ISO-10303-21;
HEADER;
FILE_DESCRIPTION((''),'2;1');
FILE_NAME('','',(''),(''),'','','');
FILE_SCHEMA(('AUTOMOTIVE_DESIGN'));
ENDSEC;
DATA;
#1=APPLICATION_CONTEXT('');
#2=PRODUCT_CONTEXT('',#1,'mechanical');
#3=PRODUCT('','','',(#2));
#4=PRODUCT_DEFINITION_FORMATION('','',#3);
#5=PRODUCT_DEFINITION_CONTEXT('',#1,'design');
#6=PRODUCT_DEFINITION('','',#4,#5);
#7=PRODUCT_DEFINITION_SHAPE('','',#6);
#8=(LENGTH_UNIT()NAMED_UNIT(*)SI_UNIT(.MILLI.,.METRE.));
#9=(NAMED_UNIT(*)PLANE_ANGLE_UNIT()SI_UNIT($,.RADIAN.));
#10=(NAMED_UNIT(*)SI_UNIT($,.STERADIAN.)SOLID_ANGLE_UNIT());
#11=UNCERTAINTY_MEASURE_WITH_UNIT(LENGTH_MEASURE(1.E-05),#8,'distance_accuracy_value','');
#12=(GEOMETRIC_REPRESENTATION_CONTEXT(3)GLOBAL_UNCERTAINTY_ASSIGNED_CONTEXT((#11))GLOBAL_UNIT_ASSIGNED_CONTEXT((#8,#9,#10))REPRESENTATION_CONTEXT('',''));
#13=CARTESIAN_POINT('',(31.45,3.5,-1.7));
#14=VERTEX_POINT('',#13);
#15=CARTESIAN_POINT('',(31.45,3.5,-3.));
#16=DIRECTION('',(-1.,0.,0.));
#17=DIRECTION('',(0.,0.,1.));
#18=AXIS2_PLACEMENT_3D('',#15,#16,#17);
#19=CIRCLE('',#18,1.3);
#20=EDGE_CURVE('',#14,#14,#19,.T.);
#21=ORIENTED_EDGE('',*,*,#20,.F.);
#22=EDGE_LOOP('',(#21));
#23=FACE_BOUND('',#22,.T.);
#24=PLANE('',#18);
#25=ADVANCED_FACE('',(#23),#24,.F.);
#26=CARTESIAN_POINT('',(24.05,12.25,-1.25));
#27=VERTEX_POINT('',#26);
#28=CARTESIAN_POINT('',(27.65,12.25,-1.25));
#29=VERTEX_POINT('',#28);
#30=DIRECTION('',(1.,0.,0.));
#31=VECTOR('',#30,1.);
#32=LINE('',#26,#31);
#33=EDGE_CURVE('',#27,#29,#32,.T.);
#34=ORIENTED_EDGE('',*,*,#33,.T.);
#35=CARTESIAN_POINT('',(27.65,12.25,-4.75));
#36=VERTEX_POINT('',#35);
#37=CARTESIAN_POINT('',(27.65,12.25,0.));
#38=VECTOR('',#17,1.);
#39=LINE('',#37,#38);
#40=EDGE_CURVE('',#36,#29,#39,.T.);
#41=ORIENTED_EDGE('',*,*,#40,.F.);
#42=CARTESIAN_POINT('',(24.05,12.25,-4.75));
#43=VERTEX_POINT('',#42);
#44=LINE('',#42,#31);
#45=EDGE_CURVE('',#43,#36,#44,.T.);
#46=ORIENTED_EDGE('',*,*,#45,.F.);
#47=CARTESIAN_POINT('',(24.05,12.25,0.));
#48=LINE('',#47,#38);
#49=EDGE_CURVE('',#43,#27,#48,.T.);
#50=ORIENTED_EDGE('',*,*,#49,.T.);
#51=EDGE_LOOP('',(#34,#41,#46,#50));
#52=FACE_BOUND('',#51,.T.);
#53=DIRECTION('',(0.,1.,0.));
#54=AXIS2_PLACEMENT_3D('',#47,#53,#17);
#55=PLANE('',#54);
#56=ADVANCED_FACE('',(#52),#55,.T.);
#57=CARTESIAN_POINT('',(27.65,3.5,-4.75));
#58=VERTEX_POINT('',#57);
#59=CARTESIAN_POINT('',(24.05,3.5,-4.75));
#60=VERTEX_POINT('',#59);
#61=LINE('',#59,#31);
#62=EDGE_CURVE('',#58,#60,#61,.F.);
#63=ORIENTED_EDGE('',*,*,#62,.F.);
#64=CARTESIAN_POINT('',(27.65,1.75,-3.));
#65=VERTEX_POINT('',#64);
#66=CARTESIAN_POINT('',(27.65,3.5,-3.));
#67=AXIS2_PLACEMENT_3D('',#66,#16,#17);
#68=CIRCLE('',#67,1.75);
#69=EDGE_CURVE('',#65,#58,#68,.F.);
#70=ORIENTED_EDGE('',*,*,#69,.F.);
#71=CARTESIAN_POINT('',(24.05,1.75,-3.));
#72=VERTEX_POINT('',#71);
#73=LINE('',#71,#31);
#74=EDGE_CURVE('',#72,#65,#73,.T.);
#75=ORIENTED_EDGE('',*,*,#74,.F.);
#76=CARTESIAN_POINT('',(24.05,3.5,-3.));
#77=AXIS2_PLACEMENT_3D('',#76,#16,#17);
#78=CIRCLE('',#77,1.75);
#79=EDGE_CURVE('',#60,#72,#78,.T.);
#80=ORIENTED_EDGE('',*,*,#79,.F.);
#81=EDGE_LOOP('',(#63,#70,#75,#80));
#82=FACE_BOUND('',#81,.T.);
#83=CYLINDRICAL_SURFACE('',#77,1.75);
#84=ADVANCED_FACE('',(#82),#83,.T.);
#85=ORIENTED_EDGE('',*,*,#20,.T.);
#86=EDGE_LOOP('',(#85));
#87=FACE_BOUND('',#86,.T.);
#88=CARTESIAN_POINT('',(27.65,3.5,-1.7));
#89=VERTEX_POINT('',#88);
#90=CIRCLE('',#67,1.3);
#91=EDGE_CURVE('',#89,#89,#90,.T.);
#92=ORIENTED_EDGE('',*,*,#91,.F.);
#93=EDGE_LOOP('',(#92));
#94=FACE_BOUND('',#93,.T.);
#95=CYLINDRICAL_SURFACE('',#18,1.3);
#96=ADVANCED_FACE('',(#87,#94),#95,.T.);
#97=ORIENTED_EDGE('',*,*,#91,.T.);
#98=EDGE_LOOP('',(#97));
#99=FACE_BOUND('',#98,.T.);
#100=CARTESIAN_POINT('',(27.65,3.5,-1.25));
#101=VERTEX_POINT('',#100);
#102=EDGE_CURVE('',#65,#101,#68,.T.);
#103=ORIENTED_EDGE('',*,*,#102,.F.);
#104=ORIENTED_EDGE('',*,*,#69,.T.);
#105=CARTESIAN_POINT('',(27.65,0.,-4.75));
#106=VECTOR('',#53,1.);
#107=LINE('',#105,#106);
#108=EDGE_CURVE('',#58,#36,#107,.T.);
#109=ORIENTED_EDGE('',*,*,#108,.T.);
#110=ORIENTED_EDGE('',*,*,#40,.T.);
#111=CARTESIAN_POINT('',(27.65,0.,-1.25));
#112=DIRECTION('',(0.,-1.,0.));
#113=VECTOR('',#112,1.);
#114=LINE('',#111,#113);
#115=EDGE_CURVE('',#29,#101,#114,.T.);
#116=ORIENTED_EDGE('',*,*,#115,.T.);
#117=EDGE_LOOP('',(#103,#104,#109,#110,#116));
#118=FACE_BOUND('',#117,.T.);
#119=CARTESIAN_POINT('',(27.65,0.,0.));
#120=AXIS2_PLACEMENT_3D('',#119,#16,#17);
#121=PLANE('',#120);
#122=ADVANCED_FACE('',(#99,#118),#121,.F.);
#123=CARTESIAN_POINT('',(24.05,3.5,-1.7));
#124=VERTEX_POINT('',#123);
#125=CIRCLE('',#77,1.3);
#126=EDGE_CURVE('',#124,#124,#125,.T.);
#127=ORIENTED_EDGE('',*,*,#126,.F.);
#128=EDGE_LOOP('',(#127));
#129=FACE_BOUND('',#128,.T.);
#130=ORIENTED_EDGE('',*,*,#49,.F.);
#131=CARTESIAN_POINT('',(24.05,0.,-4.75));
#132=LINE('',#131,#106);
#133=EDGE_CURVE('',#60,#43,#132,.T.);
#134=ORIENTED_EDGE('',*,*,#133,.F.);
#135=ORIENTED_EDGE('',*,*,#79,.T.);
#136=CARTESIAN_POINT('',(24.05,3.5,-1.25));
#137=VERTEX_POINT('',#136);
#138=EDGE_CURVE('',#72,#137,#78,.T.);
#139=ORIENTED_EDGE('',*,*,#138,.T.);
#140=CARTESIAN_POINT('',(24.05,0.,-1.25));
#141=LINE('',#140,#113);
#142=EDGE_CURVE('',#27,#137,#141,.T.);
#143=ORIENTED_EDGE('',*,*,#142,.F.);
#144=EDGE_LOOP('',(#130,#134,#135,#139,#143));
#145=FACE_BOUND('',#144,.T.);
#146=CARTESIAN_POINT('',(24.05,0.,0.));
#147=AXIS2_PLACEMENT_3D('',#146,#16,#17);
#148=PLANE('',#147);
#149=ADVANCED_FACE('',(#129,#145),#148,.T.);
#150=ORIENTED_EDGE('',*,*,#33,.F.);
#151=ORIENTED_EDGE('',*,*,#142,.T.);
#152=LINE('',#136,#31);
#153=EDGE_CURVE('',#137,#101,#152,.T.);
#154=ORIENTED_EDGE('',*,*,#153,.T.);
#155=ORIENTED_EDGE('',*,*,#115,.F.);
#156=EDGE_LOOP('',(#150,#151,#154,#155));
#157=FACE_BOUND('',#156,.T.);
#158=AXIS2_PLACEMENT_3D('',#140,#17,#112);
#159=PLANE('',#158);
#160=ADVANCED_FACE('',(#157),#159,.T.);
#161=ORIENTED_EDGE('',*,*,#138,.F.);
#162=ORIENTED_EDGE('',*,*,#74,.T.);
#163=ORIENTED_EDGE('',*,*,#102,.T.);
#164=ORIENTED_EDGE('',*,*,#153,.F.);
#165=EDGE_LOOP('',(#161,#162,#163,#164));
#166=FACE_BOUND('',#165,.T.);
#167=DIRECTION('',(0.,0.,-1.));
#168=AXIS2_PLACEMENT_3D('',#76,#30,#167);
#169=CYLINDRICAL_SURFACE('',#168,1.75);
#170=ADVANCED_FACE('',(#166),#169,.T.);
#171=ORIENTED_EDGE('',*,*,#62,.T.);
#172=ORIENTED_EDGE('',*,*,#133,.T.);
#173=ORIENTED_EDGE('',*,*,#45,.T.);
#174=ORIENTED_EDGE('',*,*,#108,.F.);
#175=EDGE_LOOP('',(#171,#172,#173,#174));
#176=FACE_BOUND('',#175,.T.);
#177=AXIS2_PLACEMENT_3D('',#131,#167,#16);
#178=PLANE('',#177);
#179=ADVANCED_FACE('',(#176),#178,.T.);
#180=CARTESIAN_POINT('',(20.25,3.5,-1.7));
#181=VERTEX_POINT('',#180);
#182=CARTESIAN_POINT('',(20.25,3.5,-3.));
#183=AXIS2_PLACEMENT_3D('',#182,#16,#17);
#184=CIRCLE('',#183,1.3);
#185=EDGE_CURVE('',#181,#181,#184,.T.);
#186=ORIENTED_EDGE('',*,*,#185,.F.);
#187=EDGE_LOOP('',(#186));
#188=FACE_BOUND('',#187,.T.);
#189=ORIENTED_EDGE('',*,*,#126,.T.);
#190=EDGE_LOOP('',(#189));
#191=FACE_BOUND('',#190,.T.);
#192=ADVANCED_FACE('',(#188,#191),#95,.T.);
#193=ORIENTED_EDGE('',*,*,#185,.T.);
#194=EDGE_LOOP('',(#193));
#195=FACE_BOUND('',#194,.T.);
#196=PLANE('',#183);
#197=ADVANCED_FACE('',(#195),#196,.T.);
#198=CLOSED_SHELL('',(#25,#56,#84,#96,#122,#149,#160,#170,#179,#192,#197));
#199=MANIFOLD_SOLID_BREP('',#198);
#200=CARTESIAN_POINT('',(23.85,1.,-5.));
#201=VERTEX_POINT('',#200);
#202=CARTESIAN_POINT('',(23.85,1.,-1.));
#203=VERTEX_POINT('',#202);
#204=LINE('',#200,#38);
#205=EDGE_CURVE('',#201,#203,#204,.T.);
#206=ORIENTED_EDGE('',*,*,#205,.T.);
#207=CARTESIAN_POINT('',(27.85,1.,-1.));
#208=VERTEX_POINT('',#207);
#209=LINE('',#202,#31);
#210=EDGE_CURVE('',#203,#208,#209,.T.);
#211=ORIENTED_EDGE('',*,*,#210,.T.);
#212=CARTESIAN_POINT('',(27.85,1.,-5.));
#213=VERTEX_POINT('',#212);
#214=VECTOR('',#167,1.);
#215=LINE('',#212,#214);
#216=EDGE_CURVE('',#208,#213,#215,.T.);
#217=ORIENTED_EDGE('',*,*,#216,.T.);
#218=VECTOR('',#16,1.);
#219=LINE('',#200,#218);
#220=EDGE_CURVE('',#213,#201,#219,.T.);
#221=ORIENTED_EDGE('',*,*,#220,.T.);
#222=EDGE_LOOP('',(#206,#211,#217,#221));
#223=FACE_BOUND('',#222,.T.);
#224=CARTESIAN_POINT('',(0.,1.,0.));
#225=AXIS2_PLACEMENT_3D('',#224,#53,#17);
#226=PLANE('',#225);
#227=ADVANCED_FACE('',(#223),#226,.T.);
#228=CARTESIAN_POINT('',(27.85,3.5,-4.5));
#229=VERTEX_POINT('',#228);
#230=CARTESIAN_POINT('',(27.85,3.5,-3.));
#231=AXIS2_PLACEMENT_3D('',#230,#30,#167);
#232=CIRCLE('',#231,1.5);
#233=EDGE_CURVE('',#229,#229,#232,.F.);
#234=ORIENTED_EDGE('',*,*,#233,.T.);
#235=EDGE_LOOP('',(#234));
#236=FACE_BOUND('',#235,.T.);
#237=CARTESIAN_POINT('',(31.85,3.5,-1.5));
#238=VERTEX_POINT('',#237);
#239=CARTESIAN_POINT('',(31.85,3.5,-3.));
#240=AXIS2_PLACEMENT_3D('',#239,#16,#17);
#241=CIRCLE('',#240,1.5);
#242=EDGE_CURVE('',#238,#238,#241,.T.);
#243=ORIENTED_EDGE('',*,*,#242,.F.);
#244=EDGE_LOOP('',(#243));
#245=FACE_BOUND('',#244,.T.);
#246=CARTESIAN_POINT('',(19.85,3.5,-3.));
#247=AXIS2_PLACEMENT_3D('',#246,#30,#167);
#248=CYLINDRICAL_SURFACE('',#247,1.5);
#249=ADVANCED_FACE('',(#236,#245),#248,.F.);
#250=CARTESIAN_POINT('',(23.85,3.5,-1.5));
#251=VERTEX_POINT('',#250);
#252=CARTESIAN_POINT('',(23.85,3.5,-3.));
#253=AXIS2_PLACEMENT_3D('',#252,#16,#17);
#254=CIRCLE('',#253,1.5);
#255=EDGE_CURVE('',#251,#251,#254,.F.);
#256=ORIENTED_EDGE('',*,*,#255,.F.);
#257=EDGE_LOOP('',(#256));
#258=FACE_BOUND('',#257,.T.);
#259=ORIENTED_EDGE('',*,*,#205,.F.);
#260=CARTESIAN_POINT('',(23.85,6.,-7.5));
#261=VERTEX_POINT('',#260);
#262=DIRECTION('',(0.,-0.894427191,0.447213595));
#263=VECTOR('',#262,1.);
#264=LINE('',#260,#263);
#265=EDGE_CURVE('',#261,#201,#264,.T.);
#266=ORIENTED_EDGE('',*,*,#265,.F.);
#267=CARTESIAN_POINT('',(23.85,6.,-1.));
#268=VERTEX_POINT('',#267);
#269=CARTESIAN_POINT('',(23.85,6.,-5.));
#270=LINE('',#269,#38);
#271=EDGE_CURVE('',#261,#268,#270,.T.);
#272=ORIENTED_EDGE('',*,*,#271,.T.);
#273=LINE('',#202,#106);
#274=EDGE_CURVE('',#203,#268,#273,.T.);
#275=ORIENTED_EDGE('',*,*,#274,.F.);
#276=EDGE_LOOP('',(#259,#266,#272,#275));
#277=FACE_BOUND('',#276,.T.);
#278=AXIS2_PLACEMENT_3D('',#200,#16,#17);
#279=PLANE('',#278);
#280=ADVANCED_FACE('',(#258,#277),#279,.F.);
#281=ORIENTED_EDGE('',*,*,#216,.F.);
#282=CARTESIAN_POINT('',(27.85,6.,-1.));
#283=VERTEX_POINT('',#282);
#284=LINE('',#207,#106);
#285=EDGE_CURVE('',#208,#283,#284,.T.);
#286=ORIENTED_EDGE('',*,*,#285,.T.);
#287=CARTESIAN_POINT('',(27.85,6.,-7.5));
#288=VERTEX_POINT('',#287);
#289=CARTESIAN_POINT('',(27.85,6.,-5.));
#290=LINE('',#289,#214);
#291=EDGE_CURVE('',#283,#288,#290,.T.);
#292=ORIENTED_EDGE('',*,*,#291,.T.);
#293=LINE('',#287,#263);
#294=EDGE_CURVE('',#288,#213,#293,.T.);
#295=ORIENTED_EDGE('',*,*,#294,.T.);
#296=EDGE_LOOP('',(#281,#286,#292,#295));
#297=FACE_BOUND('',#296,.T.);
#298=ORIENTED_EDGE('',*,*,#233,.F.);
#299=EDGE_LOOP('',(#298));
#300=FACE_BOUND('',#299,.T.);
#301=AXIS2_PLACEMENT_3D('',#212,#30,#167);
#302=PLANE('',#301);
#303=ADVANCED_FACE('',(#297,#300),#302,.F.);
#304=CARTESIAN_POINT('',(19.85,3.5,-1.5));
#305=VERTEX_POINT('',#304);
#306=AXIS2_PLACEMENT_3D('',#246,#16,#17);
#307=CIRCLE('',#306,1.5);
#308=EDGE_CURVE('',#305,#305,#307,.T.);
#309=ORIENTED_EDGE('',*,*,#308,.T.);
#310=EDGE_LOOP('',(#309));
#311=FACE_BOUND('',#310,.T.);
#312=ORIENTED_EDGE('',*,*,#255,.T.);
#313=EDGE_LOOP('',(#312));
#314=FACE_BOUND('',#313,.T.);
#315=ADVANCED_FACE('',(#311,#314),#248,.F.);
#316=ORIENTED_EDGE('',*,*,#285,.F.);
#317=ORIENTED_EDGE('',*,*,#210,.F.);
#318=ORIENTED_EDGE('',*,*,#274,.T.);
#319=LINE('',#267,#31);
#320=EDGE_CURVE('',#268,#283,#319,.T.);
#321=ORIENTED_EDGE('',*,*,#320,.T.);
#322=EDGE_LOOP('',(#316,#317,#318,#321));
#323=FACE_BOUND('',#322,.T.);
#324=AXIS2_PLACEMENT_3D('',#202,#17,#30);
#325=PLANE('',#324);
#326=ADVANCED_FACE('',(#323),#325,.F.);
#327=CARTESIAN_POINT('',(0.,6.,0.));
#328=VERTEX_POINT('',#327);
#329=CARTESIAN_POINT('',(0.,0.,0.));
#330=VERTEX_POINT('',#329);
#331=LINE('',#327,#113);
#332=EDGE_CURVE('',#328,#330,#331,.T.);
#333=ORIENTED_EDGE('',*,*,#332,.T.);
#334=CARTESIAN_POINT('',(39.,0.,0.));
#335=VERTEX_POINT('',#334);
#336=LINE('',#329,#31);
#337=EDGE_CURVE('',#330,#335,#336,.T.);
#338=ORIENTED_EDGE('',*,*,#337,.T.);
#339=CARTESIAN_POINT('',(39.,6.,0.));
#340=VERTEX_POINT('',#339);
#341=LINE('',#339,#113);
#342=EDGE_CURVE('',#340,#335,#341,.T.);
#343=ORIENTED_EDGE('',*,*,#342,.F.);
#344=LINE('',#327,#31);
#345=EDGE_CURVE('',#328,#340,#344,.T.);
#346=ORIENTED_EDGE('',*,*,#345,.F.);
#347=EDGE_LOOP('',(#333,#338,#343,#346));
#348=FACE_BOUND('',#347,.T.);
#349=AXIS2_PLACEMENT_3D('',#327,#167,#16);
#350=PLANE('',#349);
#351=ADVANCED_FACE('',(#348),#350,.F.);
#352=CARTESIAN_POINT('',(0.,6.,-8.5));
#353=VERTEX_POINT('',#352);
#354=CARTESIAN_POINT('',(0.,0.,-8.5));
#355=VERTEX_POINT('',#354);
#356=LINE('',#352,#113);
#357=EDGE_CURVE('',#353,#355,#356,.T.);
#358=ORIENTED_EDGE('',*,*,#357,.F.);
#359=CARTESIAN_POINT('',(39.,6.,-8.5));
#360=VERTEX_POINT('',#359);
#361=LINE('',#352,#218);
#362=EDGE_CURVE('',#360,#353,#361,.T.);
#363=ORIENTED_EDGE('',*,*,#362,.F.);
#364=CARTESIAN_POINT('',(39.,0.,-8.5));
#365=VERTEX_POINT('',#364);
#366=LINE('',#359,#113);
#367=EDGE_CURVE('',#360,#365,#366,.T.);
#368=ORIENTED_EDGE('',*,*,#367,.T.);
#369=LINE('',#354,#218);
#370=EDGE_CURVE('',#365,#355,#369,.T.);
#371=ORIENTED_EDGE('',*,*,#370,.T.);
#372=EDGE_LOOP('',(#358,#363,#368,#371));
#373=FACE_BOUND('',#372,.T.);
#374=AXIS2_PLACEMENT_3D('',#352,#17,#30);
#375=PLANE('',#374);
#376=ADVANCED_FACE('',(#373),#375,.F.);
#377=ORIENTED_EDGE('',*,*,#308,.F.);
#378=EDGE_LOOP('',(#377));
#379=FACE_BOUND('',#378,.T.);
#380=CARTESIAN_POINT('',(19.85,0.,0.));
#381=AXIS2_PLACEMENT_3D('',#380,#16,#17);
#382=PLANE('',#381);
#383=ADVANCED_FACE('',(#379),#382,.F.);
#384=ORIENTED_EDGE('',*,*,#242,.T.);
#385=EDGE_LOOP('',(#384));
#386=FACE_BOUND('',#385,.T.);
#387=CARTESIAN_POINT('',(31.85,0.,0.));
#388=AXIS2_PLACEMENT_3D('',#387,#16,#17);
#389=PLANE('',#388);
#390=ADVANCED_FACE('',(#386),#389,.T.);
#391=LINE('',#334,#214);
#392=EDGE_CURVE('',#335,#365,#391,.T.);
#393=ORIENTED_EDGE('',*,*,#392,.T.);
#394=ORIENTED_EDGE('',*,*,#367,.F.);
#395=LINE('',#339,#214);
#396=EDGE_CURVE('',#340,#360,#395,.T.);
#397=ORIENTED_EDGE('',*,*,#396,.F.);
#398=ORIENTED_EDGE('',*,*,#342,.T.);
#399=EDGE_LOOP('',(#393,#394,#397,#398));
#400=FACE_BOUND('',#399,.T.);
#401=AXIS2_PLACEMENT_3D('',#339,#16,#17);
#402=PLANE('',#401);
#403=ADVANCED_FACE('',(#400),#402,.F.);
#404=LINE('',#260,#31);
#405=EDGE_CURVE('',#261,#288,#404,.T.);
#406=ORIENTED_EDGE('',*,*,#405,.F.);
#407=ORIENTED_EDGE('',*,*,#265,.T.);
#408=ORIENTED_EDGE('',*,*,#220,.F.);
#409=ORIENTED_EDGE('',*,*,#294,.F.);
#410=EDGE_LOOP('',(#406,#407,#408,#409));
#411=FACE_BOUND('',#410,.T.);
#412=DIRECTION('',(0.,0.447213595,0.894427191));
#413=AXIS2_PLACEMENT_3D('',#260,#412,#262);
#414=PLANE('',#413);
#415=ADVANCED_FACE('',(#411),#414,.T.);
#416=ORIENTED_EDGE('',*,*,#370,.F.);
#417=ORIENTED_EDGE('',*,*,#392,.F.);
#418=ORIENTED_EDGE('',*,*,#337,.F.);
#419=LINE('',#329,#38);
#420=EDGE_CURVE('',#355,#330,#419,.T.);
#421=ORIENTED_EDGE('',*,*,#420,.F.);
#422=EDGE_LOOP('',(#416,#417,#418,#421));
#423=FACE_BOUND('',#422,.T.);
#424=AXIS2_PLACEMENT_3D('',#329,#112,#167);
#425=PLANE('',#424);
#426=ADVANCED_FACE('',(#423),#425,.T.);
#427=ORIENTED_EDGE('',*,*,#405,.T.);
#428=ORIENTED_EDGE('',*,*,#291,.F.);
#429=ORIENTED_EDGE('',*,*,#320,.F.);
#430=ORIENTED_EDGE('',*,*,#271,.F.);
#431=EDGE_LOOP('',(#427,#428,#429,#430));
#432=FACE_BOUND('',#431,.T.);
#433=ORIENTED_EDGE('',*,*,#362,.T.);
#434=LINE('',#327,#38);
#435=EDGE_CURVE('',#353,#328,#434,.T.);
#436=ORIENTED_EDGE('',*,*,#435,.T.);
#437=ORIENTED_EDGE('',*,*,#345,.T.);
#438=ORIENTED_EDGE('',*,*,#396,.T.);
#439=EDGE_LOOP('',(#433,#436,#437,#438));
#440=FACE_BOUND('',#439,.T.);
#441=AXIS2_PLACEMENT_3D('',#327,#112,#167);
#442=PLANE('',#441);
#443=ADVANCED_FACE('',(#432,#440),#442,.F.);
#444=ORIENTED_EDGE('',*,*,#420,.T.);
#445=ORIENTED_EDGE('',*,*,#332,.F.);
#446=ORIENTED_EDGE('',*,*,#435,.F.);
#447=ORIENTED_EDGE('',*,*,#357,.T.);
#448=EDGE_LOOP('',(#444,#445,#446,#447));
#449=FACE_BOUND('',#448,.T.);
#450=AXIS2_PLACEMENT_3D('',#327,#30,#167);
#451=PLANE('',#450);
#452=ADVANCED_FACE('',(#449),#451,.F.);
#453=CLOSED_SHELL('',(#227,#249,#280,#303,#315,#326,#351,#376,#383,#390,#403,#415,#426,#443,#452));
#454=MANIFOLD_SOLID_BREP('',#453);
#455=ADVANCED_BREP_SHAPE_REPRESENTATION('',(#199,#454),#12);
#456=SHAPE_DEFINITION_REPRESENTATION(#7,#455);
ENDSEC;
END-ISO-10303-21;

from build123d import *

# Parameters (mm, degrees)
SKETCH1_W                = 39
SKETCH1_H                = 8.5
BOSS_EXTRUDE1_DEPTH      = 6
SKETCH2_W                = 4
SKETCH2_H                = 4
CUT_EXTRUDE1_DEPTH       = 5
CUT_EXTRUDE2_DEPTH       = 8
CUT_EXTRUDE2_DEPTH_BACK  = 4
SKETCH3_R                = 1.5
BOSS_EXTRUDE2_START      = 0.2
SKETCH4_W                = 3.5
SKETCH4_H                = 6.25
SKETCH4_H_2              = 0.75
SKETCH4_R                = 1.5
SKETCH4_R_2              = 1.3
BOSS_EXTRUDE2_DEPTH      = 3.6
BOSS_EXTRUDE3_DEPTH      = 7.6
BOSS_EXTRUDE3_DEPTH_BACK = 3.6
SKETCH4_3_R              = 1.3
FILLET1_R                = 1.75
CUT_EXTRUDE3_DEPTH       = 4


with BuildPart() as part:
    # Sketch1 → Boss-Extrude1 (new body)
    with BuildSketch(Plane(origin=(0, 0, 0), x_dir=(1, 0, 0), z_dir=(0, 1, 0))):
        with Locations((19.5, 4.25)):
            Rectangle(SKETCH1_W, SKETCH1_H)
    extrude(amount=BOSS_EXTRUDE1_DEPTH)

    # Sketch2 → Cut-Extrude1 (cut)
    with BuildSketch(Plane(origin=(0, 6, 0), x_dir=(1, 0, 0), z_dir=(0, 1, 0))):
        with Locations((25.85, 3)):
            Rectangle(SKETCH2_W, SKETCH2_H)
    extrude(amount=-CUT_EXTRUDE1_DEPTH, mode=Mode.SUBTRACT)

    # Sketch3 → Cut-Extrude2 (cut, two sides: drawn at the far end of the back side and taken through both)
    with BuildSketch(Plane.ZY.offset(-27.85).offset(-CUT_EXTRUDE2_DEPTH_BACK)):
        with Locations(Location((-3, 3.5, 0), (0, 0, 180))):
            Circle(SKETCH3_R)
    extrude(amount=CUT_EXTRUDE2_DEPTH + CUT_EXTRUDE2_DEPTH_BACK, mode=Mode.SUBTRACT)

    # Sketch5 → Cut-Extrude3 (cut)
    with BuildSketch(Plane.ZY.offset(-27.85)):
        Polygon((-5, 6), (-7.5, 6), (-5, 1), align=None)
    extrude(amount=CUT_EXTRUDE3_DEPTH, mode=Mode.SUBTRACT)


with BuildPart() as body_2:
    # Sketch4 → Boss-Extrude2 (new body)
    # profile 1 of 5: a face of its own
    with BuildSketch(Plane.ZY.offset(-27.85).offset(BOSS_EXTRUDE2_START)):
        with Locations((-3, 9.125)):
            Rectangle(SKETCH4_W, SKETCH4_H)
    # profile 2 of 5: a face of its own
    with BuildSketch(Plane.ZY.offset(-27.85).offset(BOSS_EXTRUDE2_START)):
        with Locations((-3, 5.625)):
            Rectangle(SKETCH4_W, SKETCH4_H_2)
    # profile 3 of 5: a face of its own
    with BuildSketch(Plane.ZY.offset(-27.85).offset(BOSS_EXTRUDE2_START)):
        with BuildLine():
            Line((-4.75, 1.75), (-3, 1.75))
            ThreePointArc((-3, 1.75), (-1.762563133, 2.262563133), (-1.25, 3.5))
            Line((-1.25, 3.5), (-1.25, 5.25))
            Line((-1.25, 5.25), (-4.75, 5.25))
            Line((-4.75, 5.25), (-4.75, 1.75))
        make_face()
        with Locations(Location((-3, 3.5, 0), (0, 0, 180))):
            Circle(SKETCH4_R, mode=Mode.SUBTRACT)
    # profile 4 of 5: a face of its own
    with BuildSketch(Plane.ZY.offset(-27.85).offset(BOSS_EXTRUDE2_START)):
        with Locations(Location((-3, 3.5, 0), (0, 0, 180))):
            Circle(SKETCH4_R)
        with Locations((-3, 3.5)):
            Circle(SKETCH4_R_2, mode=Mode.SUBTRACT)
    # profile 5 of 5: a face of its own
    with BuildSketch(Plane.ZY.offset(-27.85).offset(BOSS_EXTRUDE2_START)):
        with Locations((-3, 3.5)):
            Circle(SKETCH4_R_2)
    extrude(amount=BOSS_EXTRUDE2_DEPTH)

    # Sketch4<3> → Boss-Extrude3 (add, two sides: drawn at the far end of the back side and taken through both)
    with BuildSketch(Plane.ZY.offset(-27.85).offset(-BOSS_EXTRUDE3_DEPTH_BACK)):
        with Locations((-3, 3.5)):
            Circle(SKETCH4_3_R)
    extrude(amount=BOSS_EXTRUDE3_DEPTH + BOSS_EXTRUDE3_DEPTH_BACK)

    # Fillet1
    fillet1_edges = [body_2.edges().sort_by_distance(p)[0] for p in [
        (25.85, 1.75, -4.75),
    ]]
    fillet(fillet1_edges, radius=FILLET1_R - 0.0001)  # a hair under: the kernel refuses the full size


solid = Compound([part.part, body_2.part])
